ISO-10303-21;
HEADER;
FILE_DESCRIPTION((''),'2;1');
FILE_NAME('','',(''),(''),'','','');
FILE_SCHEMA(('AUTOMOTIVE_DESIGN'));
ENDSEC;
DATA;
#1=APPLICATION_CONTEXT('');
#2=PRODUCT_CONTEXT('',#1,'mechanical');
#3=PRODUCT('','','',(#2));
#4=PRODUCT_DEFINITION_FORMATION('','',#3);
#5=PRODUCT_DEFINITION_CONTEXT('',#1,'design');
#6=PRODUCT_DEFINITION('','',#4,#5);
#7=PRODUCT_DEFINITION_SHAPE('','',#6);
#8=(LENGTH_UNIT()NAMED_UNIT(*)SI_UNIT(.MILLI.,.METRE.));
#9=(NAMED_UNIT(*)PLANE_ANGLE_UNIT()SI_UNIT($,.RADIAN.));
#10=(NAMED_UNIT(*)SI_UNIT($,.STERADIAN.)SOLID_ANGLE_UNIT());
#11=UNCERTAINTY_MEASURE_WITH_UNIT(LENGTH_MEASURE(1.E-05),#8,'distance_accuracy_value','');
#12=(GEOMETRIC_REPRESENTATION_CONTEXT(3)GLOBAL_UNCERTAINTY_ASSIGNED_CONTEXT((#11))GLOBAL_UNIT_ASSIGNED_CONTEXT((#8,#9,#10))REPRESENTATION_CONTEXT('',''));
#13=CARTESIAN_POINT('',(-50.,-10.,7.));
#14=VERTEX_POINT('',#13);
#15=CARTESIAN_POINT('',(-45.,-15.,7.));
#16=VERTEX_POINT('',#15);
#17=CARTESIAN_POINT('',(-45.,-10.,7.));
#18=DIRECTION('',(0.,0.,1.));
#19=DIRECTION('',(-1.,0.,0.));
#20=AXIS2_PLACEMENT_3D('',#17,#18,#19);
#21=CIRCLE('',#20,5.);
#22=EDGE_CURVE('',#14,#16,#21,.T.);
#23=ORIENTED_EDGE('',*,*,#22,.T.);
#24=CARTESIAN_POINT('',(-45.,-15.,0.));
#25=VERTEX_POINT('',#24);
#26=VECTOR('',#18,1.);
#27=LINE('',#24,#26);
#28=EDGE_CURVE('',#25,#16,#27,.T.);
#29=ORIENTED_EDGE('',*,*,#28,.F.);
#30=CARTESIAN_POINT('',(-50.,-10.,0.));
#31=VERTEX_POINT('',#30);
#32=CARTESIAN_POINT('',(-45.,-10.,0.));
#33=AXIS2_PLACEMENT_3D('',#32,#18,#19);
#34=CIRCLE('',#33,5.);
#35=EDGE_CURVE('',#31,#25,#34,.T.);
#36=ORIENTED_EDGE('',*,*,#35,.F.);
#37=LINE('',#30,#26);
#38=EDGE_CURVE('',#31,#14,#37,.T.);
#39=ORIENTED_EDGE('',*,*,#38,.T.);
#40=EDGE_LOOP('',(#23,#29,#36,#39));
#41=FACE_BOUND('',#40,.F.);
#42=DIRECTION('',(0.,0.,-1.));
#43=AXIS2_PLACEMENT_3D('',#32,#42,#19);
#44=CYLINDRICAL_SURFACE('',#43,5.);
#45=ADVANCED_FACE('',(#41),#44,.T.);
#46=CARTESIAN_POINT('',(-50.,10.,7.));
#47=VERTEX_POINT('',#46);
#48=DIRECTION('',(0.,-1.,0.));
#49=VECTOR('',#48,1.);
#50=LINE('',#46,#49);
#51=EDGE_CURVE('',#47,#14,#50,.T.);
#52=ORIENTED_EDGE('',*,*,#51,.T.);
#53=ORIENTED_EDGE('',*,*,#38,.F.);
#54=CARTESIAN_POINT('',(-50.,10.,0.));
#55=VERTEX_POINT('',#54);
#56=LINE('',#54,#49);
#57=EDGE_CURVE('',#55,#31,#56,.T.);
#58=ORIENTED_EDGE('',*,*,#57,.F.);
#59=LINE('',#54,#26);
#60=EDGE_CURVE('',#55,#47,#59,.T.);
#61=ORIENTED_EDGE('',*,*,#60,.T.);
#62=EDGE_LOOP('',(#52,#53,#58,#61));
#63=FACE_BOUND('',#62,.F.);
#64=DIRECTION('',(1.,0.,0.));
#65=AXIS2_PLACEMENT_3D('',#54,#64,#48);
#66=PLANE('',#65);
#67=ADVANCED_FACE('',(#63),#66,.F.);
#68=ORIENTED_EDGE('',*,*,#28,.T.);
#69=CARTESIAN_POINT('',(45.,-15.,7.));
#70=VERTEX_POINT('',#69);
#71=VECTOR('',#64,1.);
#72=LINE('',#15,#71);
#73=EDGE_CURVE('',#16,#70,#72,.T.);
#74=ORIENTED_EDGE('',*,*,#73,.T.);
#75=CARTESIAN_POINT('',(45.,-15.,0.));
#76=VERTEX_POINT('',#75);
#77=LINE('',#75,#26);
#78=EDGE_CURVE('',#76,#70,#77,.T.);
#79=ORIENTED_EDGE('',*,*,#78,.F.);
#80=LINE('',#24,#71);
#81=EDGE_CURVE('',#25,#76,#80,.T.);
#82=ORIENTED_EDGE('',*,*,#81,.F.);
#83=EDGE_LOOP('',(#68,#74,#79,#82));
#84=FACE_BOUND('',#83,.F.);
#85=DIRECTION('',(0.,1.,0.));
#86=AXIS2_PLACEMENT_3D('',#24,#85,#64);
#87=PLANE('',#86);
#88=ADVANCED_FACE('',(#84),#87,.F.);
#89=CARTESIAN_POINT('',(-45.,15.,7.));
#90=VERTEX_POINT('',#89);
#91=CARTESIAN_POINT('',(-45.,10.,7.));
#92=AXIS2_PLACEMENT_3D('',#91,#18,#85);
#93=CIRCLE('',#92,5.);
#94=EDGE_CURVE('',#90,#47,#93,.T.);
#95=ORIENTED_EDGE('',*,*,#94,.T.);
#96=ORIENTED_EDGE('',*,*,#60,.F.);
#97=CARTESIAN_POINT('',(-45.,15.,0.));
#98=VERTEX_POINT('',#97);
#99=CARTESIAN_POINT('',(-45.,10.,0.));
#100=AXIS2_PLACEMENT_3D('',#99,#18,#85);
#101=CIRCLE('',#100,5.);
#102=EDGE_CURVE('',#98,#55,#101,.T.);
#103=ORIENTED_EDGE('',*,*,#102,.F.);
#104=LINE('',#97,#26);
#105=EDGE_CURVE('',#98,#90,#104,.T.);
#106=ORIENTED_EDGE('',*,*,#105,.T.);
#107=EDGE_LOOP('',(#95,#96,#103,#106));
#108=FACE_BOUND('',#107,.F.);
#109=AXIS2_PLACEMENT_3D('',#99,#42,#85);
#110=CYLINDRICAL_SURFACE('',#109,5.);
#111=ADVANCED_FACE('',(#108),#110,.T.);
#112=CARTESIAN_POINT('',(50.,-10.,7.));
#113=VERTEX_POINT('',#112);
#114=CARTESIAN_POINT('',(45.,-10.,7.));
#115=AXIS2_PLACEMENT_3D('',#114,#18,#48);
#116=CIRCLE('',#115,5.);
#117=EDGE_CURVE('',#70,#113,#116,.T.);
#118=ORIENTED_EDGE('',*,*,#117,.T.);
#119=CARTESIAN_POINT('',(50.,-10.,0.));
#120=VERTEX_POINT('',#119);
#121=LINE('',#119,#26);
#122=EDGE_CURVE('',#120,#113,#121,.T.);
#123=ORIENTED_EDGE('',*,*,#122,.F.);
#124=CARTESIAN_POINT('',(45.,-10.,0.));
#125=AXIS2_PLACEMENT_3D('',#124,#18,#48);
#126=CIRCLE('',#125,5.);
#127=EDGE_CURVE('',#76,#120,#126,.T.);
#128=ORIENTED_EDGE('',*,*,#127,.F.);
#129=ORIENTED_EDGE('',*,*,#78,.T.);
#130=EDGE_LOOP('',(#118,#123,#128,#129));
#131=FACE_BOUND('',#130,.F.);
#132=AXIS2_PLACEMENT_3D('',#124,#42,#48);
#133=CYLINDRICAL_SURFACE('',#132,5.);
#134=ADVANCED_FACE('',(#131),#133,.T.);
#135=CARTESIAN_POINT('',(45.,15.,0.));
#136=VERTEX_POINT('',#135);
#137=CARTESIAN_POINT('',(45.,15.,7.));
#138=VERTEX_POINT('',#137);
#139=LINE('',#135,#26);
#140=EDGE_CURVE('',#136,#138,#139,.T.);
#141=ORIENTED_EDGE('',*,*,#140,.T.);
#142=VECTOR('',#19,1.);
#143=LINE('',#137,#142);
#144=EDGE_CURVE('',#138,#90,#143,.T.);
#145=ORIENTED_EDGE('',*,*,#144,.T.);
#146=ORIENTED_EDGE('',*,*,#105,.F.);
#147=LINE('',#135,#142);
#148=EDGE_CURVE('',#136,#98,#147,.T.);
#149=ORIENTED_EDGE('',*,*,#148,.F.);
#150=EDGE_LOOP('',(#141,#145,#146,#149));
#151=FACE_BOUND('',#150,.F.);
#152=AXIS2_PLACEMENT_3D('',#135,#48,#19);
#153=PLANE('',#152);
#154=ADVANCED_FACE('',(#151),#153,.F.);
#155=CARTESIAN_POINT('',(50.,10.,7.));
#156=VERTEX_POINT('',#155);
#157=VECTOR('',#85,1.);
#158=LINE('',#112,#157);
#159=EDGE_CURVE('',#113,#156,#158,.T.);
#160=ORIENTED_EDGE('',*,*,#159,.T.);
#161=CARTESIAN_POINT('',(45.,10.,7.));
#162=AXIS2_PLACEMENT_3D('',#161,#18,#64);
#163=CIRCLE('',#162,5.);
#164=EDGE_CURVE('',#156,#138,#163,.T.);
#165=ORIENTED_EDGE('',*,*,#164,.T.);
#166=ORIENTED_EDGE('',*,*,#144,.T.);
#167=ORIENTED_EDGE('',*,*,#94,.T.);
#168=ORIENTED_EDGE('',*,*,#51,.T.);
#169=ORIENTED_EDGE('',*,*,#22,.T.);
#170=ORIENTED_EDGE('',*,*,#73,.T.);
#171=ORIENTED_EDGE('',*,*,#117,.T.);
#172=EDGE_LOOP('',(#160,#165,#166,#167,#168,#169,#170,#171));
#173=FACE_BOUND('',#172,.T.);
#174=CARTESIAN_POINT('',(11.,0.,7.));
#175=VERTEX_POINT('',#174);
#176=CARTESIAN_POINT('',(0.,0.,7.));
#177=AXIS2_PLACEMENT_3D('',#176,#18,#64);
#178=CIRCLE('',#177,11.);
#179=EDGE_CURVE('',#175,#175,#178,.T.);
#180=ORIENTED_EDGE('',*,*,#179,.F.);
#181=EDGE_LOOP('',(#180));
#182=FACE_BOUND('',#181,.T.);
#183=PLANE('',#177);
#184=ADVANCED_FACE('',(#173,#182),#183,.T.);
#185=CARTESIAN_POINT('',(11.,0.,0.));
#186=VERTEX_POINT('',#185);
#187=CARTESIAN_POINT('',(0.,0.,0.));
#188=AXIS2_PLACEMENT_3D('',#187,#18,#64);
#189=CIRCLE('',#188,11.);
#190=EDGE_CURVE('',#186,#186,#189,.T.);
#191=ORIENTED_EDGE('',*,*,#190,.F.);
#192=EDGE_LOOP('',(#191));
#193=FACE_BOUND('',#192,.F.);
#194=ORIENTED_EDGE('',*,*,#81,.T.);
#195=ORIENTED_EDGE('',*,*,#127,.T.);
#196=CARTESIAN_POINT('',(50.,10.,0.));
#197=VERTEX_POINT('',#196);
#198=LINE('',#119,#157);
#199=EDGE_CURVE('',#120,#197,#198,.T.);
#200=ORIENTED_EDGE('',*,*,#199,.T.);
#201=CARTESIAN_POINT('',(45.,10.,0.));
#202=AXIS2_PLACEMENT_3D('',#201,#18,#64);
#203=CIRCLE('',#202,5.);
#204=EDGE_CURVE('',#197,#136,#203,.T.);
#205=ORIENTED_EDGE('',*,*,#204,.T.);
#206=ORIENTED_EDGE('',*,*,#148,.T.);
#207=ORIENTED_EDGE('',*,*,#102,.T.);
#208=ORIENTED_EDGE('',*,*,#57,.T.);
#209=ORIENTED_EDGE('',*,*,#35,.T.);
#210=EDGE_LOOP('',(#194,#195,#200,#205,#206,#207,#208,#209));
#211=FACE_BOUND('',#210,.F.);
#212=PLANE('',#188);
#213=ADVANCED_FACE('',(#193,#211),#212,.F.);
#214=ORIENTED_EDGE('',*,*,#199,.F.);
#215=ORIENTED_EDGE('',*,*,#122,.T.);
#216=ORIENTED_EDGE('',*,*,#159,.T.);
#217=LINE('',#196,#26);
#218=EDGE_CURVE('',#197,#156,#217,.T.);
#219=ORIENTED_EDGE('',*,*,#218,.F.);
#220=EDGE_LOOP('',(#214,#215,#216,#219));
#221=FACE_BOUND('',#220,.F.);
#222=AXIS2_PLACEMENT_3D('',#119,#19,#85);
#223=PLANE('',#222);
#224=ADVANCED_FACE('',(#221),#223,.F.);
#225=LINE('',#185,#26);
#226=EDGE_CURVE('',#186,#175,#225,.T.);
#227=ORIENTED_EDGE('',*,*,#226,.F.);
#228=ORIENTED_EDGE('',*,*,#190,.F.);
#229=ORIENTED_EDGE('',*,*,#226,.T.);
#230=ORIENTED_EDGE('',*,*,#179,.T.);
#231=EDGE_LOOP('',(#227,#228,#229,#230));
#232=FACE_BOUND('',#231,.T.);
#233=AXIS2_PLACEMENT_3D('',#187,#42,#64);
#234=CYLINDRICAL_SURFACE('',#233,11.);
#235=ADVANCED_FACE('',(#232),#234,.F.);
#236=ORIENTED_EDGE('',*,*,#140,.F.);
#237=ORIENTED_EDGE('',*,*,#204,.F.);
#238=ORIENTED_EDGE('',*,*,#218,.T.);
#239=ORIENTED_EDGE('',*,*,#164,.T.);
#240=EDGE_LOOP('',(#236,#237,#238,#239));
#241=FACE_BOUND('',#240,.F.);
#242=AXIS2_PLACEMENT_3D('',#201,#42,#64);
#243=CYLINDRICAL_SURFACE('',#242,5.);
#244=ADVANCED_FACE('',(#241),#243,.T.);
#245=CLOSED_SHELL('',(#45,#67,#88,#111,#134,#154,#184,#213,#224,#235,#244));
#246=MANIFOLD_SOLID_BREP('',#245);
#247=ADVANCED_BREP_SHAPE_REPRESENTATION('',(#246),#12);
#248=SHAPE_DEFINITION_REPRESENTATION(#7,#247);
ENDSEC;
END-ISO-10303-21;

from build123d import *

# Parameters (mm, degrees)
F0_R     = 11
F1_DEPTH = 7


# Not quite as in the source:
# - a feature of the source that left no trace in its solid (it failed there, or was rolled back) is left out


with BuildPart() as f1:
    # F0 (on Top) → F1 (new body)
    with BuildSketch(Plane.XY):
        with BuildLine():
            Line((-45, -15), (45, -15))
            ThreePointArc((45, -15), (48.5355339059, -13.5355339059), (50, -10))
            Line((50, -10), (50, 10))
            ThreePointArc((50, 10), (48.5355339059, 13.5355339059), (45, 15))
            Line((45, 15), (-45, 15))
            ThreePointArc((-45, 15), (-48.5355339059, 13.5355339059), (-50, 10))
            Line((-50, 10), (-50, -10))
            ThreePointArc((-50, -10), (-48.5355339059, -13.5355339059), (-45, -15))
        make_face()
        Circle(F0_R, mode=Mode.SUBTRACT)
    extrude(amount=F1_DEPTH)


solid = f1.part
